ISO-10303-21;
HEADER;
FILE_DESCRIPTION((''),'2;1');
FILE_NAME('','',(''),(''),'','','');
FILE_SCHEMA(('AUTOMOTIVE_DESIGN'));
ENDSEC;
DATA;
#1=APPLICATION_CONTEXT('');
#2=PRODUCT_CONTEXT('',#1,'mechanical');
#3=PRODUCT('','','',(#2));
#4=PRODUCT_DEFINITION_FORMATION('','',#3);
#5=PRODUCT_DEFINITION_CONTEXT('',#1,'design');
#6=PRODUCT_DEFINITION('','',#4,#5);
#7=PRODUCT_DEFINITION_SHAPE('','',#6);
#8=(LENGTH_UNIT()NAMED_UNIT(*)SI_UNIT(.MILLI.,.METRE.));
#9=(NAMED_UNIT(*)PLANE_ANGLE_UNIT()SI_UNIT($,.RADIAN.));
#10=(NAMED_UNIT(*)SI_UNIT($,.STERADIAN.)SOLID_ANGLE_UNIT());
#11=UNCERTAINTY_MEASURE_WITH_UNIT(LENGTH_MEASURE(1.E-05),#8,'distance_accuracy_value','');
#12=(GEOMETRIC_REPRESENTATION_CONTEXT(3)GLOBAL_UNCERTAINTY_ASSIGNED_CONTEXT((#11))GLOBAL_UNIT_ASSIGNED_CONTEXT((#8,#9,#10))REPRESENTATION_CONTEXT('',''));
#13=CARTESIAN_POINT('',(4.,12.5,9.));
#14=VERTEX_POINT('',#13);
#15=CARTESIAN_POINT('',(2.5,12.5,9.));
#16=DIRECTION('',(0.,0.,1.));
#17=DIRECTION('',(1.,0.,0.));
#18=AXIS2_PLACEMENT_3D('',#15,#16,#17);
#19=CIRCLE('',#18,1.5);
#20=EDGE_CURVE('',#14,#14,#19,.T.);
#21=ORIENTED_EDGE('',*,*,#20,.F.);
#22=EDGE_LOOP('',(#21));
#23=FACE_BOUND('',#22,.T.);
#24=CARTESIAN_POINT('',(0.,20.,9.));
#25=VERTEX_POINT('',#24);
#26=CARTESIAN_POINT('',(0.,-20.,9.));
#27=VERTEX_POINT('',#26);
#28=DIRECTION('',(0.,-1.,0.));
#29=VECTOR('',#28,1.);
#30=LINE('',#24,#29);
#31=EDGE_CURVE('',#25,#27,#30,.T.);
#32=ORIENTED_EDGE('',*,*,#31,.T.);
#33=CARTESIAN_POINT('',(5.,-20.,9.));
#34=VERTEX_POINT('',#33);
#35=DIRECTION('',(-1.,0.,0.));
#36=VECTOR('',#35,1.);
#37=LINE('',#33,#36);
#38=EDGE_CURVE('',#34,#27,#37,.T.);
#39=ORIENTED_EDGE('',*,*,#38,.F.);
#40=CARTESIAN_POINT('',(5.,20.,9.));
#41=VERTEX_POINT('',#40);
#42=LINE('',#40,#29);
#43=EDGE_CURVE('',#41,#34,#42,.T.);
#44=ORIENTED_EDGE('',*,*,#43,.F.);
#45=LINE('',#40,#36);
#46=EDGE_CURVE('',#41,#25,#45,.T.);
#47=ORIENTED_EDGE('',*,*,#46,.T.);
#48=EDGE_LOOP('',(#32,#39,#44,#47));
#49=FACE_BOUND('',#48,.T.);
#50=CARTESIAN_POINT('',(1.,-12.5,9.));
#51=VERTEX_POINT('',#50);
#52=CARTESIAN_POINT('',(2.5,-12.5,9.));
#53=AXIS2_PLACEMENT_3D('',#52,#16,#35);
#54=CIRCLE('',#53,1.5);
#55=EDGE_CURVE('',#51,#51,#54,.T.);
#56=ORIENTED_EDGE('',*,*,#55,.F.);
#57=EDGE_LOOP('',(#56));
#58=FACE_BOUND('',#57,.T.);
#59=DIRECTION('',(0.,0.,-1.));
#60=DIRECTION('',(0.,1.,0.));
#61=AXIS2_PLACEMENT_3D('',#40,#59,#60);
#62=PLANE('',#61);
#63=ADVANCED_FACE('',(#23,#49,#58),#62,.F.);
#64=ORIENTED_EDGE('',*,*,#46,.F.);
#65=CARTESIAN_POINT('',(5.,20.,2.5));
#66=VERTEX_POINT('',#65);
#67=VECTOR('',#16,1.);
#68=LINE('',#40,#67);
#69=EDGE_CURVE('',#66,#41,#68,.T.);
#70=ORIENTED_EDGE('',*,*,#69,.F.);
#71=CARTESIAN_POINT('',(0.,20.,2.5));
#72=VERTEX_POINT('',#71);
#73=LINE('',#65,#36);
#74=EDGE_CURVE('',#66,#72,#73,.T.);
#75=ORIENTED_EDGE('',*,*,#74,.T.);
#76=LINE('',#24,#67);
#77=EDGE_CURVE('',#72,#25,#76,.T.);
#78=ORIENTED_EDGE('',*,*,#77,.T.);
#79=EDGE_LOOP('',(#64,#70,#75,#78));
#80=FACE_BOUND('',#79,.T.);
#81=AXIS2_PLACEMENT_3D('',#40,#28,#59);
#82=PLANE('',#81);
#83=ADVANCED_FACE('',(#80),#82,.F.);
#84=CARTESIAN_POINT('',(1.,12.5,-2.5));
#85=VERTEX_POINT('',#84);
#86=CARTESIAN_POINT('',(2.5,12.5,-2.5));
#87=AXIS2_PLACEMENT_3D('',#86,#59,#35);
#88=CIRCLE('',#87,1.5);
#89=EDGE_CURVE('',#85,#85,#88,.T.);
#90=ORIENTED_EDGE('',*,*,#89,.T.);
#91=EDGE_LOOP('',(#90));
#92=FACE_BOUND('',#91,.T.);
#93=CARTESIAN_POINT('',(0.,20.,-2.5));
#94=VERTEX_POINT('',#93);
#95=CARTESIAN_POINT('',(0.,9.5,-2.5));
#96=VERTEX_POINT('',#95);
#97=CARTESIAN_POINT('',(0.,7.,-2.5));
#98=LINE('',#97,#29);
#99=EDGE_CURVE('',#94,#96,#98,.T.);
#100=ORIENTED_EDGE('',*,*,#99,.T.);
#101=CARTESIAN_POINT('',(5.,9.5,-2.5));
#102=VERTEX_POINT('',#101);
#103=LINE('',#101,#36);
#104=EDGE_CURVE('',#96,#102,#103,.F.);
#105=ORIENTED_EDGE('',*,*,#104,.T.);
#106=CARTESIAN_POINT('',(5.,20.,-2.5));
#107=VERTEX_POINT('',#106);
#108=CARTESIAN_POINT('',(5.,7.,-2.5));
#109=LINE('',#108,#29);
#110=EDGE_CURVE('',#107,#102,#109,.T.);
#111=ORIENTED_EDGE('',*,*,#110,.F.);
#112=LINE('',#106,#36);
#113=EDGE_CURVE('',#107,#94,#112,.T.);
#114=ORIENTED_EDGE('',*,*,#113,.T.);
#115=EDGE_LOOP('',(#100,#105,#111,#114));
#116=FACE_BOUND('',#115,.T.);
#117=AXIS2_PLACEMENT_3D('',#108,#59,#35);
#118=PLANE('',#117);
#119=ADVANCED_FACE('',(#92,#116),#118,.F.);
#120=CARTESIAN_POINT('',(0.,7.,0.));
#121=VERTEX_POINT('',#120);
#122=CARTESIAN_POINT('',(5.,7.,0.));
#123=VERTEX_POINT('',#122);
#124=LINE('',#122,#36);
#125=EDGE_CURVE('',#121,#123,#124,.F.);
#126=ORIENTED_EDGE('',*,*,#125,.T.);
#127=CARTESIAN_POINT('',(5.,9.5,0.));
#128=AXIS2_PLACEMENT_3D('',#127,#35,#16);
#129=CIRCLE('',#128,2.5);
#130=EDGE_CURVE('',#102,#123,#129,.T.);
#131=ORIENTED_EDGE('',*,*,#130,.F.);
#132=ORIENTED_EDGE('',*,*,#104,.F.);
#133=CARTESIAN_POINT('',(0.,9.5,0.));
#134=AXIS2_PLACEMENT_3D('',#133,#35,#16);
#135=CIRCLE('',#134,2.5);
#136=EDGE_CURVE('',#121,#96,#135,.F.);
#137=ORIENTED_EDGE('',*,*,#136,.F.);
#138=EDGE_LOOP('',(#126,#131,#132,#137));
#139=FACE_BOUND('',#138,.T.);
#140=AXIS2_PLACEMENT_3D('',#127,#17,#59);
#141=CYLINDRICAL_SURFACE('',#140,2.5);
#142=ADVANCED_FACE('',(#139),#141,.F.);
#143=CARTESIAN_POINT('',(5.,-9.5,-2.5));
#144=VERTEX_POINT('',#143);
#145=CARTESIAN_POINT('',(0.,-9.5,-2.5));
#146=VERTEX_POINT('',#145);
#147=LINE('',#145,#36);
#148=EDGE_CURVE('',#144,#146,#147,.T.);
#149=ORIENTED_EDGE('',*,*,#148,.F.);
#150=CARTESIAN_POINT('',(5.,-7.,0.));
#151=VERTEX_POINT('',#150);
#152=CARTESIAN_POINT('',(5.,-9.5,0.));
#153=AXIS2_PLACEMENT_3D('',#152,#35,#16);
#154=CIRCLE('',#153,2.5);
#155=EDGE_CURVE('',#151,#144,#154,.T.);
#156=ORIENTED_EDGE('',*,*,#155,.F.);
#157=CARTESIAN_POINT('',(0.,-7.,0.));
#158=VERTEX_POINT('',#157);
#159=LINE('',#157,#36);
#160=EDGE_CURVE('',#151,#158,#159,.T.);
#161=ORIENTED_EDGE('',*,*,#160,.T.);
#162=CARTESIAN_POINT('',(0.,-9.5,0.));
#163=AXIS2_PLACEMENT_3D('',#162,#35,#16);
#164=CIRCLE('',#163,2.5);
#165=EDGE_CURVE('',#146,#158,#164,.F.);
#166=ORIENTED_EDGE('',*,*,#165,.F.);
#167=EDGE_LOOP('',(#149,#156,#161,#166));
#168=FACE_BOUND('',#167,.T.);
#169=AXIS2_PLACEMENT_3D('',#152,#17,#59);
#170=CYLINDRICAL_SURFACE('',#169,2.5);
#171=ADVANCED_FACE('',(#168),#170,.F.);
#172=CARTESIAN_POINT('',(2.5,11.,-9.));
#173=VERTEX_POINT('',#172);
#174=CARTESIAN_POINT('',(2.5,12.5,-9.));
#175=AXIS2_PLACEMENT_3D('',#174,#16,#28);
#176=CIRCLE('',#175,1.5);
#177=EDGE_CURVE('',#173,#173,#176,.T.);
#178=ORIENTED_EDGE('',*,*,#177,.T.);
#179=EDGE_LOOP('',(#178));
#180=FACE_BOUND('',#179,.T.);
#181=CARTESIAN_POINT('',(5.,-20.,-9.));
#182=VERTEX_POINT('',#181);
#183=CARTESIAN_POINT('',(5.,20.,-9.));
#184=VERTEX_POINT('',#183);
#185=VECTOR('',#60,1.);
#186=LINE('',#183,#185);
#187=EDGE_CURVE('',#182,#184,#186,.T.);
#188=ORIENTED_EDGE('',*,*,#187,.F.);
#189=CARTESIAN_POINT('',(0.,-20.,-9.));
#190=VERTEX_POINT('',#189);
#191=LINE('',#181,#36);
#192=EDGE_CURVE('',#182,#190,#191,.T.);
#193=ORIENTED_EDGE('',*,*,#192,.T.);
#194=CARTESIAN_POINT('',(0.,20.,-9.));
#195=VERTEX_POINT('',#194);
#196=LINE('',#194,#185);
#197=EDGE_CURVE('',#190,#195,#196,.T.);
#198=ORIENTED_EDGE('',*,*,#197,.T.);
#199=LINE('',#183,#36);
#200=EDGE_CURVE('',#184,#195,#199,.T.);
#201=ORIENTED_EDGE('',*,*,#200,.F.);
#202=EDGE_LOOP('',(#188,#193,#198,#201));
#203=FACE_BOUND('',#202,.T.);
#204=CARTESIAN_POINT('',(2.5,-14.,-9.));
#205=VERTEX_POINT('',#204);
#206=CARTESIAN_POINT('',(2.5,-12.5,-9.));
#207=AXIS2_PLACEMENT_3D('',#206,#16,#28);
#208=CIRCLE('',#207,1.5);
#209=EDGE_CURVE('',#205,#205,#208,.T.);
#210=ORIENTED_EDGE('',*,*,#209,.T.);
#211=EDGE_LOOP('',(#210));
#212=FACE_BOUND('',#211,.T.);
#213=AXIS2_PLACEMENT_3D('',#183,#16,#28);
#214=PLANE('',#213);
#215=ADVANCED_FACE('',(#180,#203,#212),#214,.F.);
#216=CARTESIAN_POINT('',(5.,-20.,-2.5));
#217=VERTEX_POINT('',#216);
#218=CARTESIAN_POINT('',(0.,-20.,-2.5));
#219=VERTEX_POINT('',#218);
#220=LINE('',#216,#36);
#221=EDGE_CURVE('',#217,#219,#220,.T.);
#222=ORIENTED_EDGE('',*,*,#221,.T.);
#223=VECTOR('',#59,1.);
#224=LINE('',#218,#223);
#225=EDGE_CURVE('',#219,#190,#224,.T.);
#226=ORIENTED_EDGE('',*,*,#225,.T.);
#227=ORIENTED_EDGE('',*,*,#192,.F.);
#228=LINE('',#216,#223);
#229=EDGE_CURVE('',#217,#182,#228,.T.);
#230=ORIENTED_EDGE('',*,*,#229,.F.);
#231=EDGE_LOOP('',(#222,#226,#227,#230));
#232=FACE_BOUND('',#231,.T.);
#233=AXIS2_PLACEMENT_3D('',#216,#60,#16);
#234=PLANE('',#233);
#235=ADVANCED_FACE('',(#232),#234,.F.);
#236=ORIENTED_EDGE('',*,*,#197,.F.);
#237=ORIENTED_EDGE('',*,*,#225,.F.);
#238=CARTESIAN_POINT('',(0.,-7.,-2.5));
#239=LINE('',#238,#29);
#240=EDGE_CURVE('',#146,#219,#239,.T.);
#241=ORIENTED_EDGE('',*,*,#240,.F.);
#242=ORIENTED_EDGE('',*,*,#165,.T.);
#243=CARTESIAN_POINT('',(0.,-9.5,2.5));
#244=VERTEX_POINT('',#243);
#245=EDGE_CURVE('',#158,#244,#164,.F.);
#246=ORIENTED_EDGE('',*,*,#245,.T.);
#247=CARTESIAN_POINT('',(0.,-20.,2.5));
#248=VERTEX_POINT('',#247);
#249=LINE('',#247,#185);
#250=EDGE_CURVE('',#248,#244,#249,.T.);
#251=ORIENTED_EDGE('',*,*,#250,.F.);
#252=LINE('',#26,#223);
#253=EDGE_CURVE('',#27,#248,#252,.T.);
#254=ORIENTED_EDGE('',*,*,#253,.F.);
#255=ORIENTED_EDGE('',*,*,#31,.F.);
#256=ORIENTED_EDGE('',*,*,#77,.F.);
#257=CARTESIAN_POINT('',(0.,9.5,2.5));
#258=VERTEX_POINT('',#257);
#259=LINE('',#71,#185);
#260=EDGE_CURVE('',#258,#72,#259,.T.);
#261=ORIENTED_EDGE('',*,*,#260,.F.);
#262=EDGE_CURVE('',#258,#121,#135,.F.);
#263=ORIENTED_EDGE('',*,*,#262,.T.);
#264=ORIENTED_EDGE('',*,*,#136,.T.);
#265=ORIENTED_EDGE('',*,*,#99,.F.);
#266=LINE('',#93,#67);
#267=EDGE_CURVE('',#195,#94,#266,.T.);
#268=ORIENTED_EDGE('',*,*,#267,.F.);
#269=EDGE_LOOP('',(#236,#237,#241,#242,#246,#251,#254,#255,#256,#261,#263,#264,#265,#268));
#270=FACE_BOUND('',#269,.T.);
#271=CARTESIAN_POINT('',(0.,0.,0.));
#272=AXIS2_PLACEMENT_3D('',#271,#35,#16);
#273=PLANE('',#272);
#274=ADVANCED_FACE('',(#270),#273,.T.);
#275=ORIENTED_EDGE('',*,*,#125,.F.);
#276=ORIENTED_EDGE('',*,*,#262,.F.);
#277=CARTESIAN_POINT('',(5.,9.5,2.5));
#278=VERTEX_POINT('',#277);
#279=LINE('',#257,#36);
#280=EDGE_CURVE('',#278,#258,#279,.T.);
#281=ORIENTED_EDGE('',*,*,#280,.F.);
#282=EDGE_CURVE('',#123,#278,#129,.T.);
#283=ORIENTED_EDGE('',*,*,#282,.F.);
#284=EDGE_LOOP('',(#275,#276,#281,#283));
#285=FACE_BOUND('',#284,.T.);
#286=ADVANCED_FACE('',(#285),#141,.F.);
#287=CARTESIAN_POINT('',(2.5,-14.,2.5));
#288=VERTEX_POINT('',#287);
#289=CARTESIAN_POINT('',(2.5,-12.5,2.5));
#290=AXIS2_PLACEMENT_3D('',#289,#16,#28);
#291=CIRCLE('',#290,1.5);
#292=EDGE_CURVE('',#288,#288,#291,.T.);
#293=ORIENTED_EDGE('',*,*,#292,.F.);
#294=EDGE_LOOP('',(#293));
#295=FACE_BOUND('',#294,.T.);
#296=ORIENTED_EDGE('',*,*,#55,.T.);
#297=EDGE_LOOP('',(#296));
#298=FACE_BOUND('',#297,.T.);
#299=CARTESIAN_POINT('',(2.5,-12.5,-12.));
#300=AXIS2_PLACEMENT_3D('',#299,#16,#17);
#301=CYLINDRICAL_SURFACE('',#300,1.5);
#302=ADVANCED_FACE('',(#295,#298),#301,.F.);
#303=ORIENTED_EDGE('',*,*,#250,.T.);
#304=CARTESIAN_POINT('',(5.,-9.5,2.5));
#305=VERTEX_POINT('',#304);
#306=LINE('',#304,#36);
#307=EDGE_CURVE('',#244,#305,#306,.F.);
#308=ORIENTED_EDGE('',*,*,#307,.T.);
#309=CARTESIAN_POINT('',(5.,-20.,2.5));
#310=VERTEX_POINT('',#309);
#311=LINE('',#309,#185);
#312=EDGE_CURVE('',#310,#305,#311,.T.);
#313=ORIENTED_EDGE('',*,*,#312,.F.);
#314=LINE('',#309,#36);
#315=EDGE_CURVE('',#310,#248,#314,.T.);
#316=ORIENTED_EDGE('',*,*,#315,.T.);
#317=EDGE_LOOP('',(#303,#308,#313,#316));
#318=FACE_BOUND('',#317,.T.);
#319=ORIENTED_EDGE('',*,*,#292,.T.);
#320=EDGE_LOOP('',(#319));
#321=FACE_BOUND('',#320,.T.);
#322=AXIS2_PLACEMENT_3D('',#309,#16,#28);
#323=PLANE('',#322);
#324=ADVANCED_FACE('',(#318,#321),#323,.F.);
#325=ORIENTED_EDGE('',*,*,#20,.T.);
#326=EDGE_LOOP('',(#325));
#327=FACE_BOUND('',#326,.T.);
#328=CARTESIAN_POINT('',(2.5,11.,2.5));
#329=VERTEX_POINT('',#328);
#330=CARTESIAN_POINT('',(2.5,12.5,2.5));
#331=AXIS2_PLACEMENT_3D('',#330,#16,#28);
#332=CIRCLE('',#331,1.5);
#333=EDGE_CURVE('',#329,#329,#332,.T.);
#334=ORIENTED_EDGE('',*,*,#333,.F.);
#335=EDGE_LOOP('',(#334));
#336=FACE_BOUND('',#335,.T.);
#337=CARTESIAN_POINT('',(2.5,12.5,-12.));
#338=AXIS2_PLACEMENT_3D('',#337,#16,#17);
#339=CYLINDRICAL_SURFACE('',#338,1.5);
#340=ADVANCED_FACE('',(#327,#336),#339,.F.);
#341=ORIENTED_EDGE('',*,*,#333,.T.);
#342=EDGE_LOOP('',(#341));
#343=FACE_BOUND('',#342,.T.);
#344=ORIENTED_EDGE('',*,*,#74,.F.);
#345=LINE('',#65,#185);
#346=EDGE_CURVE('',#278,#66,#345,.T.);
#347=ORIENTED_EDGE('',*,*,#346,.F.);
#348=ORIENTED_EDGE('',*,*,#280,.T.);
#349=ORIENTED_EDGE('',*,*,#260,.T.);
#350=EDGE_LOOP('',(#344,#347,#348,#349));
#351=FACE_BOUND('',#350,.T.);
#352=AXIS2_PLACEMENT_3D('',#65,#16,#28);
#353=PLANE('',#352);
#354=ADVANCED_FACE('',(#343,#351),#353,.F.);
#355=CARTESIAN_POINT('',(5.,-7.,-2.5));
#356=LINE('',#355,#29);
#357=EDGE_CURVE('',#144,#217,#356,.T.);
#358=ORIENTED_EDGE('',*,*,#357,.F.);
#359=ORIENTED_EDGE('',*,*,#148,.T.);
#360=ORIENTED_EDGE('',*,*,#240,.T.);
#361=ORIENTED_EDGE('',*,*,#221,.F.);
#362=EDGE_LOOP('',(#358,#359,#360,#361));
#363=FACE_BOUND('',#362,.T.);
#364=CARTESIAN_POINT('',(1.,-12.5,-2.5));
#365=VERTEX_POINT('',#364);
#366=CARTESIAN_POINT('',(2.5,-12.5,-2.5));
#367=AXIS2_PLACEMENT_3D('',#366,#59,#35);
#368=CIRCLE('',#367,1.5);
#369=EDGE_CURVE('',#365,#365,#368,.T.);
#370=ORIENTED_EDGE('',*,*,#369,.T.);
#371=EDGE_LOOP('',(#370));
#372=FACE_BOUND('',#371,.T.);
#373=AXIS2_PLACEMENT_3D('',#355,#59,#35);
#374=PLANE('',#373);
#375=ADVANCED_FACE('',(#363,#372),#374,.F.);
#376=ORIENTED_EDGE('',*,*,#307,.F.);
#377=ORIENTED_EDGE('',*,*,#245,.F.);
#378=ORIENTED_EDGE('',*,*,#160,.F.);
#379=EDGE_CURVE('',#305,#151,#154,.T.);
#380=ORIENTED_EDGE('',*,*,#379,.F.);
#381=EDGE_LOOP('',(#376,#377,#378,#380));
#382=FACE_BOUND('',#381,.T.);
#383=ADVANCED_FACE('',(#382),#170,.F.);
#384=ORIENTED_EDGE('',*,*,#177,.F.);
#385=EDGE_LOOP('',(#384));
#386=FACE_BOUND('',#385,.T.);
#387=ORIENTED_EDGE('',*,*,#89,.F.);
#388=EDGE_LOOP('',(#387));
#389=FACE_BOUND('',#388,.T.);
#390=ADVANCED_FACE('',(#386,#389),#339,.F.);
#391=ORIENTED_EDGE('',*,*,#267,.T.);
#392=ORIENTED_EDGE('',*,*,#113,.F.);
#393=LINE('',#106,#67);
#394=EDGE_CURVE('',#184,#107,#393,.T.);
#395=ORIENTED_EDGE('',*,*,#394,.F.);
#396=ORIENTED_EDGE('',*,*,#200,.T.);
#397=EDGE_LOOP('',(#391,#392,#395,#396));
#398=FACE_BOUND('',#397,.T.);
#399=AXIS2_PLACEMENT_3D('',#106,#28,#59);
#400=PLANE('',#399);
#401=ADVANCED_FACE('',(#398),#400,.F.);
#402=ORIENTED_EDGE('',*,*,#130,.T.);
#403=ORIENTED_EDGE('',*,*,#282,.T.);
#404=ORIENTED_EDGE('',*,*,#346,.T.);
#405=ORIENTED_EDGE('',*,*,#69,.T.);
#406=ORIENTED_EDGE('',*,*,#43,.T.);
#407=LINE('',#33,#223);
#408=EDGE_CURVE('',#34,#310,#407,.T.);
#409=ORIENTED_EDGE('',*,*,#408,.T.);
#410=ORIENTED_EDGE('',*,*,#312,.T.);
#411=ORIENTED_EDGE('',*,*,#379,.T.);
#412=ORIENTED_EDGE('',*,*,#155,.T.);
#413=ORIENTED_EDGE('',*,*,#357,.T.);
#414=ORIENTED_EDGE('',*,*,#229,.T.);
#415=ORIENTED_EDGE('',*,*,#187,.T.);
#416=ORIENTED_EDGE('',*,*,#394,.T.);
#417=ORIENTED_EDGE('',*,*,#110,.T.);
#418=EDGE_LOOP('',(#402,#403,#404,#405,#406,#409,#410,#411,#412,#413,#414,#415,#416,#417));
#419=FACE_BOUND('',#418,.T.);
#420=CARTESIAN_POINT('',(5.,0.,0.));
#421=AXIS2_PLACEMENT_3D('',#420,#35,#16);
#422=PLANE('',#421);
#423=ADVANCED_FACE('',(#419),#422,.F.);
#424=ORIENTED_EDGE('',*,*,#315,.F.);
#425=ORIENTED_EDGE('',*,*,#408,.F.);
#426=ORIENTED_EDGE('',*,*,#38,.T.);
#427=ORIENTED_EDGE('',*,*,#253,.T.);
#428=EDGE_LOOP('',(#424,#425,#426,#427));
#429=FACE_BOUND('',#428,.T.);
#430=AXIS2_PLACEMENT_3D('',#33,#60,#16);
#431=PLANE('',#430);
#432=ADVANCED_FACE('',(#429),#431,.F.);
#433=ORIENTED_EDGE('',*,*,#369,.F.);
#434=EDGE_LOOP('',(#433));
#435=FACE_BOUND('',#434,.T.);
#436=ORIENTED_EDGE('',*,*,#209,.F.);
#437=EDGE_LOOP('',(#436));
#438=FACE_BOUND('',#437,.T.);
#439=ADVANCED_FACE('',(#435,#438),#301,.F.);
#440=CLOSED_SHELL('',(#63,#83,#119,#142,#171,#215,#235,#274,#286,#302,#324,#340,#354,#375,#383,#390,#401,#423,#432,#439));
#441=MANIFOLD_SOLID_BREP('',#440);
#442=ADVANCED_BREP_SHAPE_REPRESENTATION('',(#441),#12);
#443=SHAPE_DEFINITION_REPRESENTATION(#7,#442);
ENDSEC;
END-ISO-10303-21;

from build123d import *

# Parameters (mm, degrees)
EXTRUDE_1_DEPTH     = 5
SKETCH_2_R          = 1.5
CUT_EXTRUDE_1_DEPTH = 21
FILLET_1_R          = 2.5


with BuildPart() as part:
    # 草图1 → 凸台-拉伸1 (new body)
    with BuildSketch(Plane(origin=(0, 0, 0), x_dir=(0, 0, -1), z_dir=(1, 0, 0))):
        Polygon((-2.5, 20), (-2.5, 7), (2.5, 7), (2.5, 20), (9, 20), (9, -20), (2.5, -20), (2.5, -7), (-2.5, -7), (-2.5, -20), (-9, -20), (-9, 20), align=None)
    extrude(amount=EXTRUDE_1_DEPTH)

    # 草图2 → 切除-拉伸1 (cut)
    with BuildSketch(Plane.XY.offset(9)):
        with Locations((2.5, 12.5)):
            Circle(SKETCH_2_R)
        with Locations(Location((2.5, -12.5, 0), (0, 0, 270))):
            Circle(SKETCH_2_R)
    extrude(amount=-CUT_EXTRUDE_1_DEPTH, mode=Mode.SUBTRACT)

    # 圆角1
    fillet_1_edges = [part.edges().sort_by_distance(p)[0] for p in [
        (2.5, 7, -2.5),
        (2.5, 7, 2.5),
        (2.5, -7, -2.5),
        (2.5, -7, 2.5),
    ]]
    fillet(fillet_1_edges, radius=FILLET_1_R - 0.0001)  # a hair under: the kernel refuses the full size


solid = part.part
